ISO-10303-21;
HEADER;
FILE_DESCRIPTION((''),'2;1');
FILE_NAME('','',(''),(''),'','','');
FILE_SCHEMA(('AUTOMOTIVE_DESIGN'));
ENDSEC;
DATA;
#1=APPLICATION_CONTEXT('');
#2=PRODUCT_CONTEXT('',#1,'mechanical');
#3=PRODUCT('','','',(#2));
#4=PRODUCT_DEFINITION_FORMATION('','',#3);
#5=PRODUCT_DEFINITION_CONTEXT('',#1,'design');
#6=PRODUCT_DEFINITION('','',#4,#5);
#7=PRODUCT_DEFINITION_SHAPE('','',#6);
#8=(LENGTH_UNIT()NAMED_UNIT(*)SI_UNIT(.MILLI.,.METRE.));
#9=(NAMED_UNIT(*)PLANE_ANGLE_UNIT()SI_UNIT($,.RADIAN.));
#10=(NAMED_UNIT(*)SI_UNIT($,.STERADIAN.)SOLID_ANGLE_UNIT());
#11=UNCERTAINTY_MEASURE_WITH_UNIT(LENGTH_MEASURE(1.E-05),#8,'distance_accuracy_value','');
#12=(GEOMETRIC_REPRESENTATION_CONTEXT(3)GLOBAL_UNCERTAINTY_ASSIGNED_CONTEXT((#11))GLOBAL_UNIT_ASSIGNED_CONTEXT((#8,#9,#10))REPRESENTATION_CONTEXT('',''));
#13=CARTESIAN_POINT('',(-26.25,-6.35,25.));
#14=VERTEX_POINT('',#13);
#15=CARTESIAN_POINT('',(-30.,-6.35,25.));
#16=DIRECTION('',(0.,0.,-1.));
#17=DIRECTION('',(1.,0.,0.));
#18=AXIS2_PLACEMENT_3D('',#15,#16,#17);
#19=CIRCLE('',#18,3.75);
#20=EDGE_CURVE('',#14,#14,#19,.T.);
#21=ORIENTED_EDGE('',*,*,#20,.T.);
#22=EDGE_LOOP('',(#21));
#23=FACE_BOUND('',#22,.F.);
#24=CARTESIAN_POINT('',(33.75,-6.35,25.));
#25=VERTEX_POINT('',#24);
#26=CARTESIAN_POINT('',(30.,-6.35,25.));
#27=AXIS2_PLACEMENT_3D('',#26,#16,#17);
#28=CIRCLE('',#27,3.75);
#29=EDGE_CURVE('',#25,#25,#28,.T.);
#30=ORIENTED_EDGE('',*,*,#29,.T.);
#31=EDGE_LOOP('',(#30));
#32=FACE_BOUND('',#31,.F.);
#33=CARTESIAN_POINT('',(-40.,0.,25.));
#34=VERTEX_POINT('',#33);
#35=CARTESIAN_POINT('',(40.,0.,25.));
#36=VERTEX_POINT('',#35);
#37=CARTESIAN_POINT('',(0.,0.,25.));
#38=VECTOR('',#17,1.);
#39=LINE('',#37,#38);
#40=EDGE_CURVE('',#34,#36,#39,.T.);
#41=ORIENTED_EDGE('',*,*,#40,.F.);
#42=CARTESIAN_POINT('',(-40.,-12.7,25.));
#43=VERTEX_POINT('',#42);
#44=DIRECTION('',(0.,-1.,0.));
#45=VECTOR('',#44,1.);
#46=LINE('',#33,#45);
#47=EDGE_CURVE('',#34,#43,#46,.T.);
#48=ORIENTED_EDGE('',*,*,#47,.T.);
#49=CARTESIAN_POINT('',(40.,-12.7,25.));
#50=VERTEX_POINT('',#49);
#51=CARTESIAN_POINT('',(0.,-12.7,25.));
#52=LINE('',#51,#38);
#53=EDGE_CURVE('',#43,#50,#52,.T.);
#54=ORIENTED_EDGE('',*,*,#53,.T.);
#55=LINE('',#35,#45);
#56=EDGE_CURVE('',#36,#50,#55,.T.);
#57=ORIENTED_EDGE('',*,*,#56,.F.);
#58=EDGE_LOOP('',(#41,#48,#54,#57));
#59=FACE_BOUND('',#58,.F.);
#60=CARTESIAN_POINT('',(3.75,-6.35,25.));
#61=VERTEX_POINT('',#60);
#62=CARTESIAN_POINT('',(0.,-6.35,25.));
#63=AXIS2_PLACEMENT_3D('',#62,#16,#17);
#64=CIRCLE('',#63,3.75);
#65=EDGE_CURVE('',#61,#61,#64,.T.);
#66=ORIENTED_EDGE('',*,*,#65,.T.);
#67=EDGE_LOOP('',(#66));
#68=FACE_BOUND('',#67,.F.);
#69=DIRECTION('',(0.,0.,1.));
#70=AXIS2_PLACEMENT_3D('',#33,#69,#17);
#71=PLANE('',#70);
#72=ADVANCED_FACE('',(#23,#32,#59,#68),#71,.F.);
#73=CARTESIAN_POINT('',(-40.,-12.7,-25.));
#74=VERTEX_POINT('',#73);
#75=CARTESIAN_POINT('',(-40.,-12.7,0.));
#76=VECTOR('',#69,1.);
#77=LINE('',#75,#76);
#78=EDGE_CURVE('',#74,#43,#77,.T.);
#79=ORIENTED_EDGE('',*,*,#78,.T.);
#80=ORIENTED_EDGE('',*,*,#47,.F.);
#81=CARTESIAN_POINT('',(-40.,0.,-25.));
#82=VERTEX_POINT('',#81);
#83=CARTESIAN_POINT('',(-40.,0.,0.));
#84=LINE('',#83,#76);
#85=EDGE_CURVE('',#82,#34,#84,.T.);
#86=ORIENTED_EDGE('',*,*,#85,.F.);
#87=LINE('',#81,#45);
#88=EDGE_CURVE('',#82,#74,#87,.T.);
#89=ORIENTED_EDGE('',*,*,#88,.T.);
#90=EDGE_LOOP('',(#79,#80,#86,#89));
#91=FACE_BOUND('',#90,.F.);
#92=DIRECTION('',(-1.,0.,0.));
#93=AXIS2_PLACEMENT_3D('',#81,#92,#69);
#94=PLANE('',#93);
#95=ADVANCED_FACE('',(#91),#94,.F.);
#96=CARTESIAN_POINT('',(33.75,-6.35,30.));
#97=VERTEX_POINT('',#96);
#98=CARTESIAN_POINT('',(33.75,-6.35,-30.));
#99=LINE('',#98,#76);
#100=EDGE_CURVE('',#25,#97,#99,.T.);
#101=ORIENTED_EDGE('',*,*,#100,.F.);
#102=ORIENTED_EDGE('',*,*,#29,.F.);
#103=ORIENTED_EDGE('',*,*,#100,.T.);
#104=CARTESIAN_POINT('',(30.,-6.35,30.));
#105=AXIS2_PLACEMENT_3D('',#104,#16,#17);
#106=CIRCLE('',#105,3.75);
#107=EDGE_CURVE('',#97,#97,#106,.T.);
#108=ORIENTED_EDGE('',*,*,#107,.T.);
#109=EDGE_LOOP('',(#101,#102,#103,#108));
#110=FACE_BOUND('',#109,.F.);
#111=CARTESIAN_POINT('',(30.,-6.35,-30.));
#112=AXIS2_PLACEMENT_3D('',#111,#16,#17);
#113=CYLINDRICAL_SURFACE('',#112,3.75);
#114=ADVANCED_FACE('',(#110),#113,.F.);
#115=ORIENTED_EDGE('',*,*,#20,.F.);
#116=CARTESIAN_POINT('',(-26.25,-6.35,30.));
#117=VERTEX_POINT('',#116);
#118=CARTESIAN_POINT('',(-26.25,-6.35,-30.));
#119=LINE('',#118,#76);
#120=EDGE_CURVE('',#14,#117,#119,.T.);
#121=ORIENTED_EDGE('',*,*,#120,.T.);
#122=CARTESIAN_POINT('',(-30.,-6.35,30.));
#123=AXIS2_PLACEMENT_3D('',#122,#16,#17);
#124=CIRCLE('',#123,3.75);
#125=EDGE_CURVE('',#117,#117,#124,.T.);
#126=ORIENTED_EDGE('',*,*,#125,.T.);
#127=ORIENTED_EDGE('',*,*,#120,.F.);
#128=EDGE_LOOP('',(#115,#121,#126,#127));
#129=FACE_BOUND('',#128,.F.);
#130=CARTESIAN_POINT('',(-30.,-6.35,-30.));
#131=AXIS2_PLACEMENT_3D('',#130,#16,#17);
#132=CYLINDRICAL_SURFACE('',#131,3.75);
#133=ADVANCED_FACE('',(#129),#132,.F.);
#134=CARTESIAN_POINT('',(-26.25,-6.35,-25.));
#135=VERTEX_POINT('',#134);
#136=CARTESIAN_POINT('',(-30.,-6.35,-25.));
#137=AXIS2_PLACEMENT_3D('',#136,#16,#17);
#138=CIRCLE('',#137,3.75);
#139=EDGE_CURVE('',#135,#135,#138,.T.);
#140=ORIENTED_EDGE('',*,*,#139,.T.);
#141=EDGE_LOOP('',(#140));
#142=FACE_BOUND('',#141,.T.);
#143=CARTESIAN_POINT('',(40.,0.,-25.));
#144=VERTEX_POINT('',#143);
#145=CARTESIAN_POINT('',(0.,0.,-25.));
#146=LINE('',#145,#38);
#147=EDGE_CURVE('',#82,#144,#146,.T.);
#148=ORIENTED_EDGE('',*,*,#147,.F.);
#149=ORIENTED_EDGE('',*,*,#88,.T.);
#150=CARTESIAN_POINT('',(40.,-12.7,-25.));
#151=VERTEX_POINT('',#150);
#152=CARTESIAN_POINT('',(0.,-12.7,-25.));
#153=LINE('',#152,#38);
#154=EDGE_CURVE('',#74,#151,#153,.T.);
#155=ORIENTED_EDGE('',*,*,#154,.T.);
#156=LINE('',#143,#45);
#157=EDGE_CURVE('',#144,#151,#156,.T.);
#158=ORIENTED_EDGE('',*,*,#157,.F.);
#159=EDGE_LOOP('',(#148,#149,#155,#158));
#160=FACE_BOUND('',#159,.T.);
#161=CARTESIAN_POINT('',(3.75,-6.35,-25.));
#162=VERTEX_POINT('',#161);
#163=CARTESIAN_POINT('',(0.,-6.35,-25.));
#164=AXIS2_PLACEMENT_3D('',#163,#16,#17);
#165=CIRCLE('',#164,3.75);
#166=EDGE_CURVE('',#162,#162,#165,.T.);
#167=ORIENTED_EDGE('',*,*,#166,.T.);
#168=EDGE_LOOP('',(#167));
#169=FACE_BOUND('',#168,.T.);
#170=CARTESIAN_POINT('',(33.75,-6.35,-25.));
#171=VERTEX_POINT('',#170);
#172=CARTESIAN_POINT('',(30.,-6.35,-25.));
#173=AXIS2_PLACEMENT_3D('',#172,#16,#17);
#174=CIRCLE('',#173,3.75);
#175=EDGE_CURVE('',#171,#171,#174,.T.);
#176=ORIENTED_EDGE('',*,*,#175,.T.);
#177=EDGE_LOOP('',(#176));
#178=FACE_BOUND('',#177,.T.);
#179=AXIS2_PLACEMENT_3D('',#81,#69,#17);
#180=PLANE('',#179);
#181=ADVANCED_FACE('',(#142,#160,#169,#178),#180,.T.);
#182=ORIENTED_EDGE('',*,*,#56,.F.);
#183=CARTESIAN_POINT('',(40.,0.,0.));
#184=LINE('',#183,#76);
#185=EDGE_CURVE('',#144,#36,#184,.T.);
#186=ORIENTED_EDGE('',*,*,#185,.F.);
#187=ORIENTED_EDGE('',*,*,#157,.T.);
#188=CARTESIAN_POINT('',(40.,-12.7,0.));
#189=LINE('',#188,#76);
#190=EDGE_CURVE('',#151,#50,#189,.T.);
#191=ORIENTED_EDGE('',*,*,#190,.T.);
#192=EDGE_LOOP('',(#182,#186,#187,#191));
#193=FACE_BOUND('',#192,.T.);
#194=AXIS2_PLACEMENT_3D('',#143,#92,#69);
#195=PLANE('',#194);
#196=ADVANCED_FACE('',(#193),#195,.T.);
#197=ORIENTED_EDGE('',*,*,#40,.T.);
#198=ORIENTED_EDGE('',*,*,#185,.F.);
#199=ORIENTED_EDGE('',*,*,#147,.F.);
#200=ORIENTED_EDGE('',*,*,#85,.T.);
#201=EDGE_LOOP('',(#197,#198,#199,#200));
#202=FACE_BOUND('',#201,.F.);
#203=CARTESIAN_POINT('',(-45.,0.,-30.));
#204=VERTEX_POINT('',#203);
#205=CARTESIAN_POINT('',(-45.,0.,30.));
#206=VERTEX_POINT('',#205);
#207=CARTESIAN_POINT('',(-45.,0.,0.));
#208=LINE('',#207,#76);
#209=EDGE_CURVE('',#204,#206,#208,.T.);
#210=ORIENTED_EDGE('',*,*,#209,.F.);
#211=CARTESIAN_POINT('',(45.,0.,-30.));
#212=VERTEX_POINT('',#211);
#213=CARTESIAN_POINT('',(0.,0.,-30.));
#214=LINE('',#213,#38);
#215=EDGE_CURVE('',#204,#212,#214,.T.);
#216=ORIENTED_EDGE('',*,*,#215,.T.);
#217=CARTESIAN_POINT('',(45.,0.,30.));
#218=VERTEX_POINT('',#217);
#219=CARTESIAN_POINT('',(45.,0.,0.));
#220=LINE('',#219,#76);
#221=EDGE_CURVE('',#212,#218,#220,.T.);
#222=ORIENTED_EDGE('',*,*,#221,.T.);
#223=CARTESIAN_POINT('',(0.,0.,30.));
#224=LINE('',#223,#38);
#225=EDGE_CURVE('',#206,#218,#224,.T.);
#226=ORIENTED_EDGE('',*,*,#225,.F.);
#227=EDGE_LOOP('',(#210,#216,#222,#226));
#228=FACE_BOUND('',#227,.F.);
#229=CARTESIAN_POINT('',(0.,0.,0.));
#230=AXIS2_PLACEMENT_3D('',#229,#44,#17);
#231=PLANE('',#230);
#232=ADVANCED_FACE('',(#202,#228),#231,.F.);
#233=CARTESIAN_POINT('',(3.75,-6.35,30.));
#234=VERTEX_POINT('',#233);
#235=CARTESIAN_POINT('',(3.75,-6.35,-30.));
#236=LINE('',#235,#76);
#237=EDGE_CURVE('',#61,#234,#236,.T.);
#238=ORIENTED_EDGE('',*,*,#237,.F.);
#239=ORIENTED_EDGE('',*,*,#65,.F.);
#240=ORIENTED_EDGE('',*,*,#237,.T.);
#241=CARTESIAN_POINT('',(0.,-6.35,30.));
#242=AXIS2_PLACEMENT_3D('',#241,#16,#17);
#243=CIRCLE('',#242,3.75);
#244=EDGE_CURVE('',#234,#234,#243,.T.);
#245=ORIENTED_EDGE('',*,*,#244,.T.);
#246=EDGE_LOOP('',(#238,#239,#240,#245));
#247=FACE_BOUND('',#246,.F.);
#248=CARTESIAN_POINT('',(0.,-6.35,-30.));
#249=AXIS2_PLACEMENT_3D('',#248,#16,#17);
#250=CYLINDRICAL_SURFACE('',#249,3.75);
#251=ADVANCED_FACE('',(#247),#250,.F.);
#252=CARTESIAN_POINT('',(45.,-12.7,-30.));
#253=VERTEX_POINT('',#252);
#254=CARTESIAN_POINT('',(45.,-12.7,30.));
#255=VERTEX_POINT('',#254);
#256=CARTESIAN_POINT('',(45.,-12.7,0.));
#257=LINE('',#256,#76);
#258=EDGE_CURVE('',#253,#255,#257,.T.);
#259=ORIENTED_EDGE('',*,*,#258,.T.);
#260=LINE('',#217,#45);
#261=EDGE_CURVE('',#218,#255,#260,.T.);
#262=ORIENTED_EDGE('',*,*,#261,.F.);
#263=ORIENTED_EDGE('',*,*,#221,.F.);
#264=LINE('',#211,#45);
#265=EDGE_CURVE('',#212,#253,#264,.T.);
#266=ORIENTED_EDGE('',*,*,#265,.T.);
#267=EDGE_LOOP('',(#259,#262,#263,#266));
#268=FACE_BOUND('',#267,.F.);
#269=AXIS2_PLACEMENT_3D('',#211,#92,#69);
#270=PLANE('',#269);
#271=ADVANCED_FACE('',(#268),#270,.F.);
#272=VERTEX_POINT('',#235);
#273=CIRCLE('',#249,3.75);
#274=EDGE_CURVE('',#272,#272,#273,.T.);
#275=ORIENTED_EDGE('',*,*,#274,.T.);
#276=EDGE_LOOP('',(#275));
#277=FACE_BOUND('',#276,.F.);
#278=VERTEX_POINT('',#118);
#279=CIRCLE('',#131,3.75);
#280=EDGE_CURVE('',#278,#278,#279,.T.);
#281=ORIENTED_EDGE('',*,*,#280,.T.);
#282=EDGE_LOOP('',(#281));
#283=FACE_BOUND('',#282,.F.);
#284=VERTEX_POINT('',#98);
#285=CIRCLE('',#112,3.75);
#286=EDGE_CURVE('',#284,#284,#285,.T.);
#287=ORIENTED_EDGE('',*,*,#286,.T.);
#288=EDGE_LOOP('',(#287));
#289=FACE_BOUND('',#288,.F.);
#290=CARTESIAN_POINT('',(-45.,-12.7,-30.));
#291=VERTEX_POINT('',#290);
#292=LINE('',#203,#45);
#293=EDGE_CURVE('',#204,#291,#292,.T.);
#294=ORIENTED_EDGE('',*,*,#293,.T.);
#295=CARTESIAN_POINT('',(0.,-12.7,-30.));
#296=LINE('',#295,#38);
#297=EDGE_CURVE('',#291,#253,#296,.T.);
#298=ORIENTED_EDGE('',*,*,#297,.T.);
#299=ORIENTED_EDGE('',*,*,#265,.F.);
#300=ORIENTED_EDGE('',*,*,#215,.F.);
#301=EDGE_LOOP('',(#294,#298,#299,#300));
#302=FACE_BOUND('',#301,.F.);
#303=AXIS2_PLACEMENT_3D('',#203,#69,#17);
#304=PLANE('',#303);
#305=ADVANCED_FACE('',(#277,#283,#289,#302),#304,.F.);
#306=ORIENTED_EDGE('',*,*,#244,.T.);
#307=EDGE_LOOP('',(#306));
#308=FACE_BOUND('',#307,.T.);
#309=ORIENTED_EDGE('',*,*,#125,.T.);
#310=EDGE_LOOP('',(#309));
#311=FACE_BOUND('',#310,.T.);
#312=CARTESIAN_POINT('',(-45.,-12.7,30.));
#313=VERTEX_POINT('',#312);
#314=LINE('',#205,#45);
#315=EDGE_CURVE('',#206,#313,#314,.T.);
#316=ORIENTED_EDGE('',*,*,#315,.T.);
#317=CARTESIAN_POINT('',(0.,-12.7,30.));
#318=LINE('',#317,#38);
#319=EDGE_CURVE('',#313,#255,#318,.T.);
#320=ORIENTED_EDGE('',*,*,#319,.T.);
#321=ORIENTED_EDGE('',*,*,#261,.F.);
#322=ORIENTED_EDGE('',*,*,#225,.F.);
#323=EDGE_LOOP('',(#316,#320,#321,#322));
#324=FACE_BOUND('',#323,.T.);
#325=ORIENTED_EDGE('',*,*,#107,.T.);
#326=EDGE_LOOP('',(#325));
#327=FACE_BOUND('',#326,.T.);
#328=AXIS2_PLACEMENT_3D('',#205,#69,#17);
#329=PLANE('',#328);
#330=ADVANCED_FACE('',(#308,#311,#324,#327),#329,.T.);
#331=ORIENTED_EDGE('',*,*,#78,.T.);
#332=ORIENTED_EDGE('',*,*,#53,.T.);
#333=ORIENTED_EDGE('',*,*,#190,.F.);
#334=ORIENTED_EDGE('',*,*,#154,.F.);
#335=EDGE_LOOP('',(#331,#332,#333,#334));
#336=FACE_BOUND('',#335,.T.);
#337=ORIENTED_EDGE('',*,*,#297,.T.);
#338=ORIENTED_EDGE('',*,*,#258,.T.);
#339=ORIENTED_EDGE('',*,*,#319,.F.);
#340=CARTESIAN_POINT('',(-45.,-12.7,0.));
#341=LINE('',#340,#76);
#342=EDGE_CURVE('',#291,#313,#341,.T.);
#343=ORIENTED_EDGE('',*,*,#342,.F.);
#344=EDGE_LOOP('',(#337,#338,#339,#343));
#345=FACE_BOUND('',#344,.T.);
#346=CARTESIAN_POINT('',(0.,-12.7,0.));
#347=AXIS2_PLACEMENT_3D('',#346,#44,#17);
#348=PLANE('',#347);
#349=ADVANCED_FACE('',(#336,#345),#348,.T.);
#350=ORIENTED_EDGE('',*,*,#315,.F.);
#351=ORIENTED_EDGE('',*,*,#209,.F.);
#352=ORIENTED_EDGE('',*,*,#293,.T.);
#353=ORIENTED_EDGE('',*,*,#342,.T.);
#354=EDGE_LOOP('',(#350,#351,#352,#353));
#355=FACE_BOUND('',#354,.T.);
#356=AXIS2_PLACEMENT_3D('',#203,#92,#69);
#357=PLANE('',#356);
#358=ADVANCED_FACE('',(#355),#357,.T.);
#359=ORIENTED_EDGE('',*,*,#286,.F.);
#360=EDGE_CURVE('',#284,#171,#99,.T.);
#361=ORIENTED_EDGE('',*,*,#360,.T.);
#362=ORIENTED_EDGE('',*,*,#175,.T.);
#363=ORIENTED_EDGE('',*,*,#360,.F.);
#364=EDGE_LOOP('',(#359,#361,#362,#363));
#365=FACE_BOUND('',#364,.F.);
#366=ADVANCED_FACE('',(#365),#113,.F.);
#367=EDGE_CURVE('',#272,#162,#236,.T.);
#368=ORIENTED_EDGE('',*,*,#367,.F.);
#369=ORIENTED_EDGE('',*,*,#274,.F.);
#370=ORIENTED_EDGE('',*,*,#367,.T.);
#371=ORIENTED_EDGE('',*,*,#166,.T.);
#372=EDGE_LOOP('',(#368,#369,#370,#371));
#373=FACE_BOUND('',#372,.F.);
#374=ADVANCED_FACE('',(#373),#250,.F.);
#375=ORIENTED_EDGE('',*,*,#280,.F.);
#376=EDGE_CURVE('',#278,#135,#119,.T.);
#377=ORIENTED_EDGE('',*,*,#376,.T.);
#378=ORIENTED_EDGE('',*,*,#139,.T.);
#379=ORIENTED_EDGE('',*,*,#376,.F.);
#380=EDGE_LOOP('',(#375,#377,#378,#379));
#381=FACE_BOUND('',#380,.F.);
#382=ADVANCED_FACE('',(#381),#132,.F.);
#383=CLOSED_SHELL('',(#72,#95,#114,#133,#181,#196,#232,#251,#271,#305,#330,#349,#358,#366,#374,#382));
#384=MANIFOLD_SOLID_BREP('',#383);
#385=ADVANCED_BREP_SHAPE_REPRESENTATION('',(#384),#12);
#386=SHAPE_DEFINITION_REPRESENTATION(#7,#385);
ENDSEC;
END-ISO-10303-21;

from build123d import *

# Parameters (mm, degrees)
F0_W     = 90
F0_H     = 60
F0_W_2   = 80
F0_H_2   = 50
F1_DEPTH = 12.7
F2_R     = 3.75
F3_DEPTH = 76.2


# Not quite as in the source:
# - a feature names something its author has since deleted; it is built from what else it names


with BuildPart() as f1:
    # F0 (on Front) → F1 (new body)
    with BuildSketch(Plane.XZ):
        Rectangle(F0_W, F0_H)
        Rectangle(F0_W_2, F0_H_2, mode=Mode.SUBTRACT)
    extrude(amount=F1_DEPTH)

    # F2 (on face) → F3 (cut)
    with BuildSketch(Plane(origin=(0, 0, -30), x_dir=(1, 0, 0), z_dir=(0, 0, -1))):
        with Locations((-30, 6.35)):
            Circle(F2_R)
        with Locations((0, 6.35)):
            Circle(F2_R)
        with Locations((30, 6.35)):
            Circle(F2_R)
    extrude(amount=-F3_DEPTH, mode=Mode.SUBTRACT)


solid = f1.part
